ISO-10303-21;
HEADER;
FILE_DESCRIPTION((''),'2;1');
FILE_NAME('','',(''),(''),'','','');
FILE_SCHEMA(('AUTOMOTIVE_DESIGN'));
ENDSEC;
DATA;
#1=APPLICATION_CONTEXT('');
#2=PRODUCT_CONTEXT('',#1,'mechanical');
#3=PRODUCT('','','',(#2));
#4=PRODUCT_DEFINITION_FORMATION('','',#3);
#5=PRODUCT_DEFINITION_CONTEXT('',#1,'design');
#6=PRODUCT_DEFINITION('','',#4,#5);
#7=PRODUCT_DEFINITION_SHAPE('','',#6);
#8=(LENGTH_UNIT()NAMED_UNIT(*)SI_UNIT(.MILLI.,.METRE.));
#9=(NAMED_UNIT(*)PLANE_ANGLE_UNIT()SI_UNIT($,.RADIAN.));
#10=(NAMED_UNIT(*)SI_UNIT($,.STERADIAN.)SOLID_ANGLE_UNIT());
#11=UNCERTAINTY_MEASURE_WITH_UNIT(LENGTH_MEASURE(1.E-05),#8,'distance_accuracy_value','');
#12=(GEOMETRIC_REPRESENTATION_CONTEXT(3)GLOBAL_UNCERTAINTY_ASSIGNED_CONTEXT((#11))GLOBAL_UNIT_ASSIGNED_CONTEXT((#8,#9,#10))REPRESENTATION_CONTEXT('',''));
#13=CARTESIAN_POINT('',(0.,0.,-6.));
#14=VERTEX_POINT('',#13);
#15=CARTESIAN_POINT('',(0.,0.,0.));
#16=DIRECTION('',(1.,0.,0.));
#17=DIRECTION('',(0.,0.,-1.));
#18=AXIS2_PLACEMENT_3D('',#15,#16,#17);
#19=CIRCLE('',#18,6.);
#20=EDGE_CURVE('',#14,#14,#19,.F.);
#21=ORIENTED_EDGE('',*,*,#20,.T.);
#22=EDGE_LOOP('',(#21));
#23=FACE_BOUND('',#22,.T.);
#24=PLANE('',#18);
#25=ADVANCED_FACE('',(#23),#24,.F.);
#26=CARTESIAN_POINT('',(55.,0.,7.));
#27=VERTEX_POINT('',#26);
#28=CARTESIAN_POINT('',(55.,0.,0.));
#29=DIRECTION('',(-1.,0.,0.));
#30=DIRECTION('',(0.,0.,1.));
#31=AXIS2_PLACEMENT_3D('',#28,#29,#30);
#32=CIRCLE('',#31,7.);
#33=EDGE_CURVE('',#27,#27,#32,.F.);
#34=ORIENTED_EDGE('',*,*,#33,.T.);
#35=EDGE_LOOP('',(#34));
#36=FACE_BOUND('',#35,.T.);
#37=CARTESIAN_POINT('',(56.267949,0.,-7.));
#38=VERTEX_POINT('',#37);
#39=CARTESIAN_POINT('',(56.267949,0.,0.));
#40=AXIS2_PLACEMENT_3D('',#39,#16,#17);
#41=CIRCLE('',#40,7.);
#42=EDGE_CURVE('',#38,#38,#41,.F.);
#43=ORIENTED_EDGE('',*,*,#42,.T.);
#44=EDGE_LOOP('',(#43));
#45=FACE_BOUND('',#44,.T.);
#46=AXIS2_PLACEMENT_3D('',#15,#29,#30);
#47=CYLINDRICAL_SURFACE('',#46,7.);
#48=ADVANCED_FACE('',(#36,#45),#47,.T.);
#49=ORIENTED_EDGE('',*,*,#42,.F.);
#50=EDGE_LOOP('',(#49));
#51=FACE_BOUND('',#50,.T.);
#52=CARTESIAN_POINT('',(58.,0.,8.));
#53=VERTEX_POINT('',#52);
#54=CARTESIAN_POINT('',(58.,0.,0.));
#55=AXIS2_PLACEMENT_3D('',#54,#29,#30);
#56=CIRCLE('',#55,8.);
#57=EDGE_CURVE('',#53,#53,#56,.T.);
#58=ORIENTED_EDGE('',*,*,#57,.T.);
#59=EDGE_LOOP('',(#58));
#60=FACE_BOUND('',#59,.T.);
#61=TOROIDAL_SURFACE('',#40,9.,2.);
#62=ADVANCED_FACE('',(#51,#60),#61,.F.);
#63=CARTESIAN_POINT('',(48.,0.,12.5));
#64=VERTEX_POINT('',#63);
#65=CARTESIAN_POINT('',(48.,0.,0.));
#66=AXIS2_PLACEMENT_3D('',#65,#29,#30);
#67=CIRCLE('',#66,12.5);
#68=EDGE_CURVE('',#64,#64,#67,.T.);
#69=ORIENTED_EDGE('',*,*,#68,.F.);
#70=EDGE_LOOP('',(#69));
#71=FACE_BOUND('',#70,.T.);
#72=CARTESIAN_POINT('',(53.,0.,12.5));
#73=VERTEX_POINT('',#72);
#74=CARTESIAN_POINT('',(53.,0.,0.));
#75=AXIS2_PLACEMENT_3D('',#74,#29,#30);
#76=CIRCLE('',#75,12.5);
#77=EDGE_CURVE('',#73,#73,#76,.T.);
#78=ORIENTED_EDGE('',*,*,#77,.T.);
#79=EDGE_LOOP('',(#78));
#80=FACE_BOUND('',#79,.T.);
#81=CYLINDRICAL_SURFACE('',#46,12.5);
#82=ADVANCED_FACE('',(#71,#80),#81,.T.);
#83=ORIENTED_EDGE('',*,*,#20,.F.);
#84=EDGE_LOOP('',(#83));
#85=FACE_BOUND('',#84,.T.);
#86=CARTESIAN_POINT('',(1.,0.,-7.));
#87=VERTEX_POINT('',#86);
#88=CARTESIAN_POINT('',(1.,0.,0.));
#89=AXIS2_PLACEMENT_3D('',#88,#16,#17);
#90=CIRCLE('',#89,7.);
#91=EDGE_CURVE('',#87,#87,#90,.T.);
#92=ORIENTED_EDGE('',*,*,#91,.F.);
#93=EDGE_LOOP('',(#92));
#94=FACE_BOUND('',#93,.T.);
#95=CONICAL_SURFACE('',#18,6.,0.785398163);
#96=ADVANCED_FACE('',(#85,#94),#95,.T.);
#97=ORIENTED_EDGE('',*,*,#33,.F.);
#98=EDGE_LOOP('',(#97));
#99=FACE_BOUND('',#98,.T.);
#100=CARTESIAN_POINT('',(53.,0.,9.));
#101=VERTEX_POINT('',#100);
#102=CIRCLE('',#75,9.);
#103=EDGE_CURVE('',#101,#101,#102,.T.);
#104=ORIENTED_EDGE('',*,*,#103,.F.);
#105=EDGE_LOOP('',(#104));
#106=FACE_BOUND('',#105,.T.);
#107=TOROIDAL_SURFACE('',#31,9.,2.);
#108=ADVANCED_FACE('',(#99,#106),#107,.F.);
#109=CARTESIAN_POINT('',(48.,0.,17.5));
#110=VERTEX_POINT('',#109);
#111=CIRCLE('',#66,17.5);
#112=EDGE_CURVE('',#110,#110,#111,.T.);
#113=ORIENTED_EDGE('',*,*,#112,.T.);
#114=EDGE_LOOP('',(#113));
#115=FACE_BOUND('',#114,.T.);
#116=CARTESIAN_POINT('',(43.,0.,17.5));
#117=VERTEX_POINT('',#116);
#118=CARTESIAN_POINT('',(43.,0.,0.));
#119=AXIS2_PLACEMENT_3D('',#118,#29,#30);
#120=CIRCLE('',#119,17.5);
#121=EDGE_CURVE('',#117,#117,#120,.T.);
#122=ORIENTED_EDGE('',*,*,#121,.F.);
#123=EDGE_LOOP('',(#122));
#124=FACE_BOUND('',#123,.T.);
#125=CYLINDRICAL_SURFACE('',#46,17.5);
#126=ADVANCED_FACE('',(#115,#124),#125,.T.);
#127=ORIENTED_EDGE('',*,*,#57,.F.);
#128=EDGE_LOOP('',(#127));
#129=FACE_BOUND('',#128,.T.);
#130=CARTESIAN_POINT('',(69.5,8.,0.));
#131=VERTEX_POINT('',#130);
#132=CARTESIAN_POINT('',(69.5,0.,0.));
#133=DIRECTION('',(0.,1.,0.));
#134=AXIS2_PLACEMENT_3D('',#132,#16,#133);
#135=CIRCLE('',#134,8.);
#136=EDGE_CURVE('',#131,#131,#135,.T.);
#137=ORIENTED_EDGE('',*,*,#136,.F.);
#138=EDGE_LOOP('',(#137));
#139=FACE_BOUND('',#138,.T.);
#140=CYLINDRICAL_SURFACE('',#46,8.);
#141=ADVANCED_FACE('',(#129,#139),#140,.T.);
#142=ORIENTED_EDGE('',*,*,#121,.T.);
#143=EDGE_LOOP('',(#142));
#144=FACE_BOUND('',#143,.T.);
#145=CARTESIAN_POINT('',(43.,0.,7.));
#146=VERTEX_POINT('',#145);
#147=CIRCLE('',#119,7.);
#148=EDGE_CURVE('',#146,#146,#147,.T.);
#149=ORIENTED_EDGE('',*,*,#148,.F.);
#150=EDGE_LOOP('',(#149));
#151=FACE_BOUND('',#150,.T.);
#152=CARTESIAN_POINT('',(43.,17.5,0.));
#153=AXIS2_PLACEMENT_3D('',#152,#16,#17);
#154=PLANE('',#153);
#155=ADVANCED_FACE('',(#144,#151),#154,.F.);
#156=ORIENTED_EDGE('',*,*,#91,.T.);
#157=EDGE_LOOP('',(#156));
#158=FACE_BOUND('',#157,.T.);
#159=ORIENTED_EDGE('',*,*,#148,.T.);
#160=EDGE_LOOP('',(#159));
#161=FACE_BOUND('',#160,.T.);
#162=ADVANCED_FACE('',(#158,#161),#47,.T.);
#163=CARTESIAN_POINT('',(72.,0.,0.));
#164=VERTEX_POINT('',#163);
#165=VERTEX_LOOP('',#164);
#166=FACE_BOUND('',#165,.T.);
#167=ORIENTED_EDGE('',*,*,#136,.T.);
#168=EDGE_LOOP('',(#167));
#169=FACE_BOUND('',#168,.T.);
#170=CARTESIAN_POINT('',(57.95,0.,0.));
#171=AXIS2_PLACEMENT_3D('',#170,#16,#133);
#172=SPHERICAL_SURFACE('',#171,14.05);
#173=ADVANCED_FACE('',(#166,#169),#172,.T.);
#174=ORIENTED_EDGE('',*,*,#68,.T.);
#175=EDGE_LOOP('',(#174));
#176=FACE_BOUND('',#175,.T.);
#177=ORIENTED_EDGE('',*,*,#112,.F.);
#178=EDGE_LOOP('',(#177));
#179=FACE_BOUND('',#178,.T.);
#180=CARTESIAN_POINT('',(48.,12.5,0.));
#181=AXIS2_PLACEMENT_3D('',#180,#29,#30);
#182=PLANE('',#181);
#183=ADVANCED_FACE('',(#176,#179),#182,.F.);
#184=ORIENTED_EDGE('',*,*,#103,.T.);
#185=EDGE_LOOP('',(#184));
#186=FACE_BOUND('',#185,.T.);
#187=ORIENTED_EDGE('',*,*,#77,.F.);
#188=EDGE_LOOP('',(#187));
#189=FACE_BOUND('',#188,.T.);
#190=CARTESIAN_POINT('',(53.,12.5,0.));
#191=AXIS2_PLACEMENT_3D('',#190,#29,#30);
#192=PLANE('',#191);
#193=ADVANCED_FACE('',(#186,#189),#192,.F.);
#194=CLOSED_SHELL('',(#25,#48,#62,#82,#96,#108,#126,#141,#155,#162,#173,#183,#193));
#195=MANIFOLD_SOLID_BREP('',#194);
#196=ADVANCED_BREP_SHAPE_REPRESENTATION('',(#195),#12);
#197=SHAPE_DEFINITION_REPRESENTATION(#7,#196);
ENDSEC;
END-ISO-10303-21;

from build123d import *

# Parameters (mm, degrees)
RADYUS2_R = 2
PAH1_SIZE = 1
IZIM2_W   = 0.487804803
IZIM2_H   = 8


with BuildPart() as part:
    # Çizim1 → Döndür1 (revolve)
    with BuildSketch(Plane.XY, mode=Mode.PRIVATE) as d_nd_r1_sk:
        Polygon((0, 0), (0, 7), (43, 7), (43, 17.5), (48, 17.5), (48, 12.5), (53, 12.5), (53, 7), (58, 7), (58, 8), (72, 8), (72, 0), align=None)
    revolve(d_nd_r1_sk.sketch.rotate(Axis((0, 0, 0), (1, 0, 0)), 90), axis=Axis((0, 0, 0), (1, 0, 0)))

    # Radyus2
    # the kernel refuses this fillet: 2 mm, written as the material it adds along each edge
    with BuildSketch(Plane(origin=(58, 0, 0), x_dir=(0, 0, 1), z_dir=(0, 1, 0))) as radyus2_piece_1:
        with BuildLine():
            CenterArc((9, -1.732050808), RADYUS2_R, 120, 60)
            Line((8, 0), (7.98, 0.034641016))
            ThreePointArc((7.98, 0.034641016), (7.5, 0.04), (7, 0.04))
            Line((7, 0.04), (6.96, 0))
            Line((6.96, 0), (6.96, -1.732050808))
            Line((6.96, -1.732050808), (7, -1.732050808))
        make_face()
    revolve(axis=Axis((58, 0, 0), (1, 0, 0)))
    with BuildSketch(Plane(origin=(53, 0, 0), x_dir=(0, 0, 1), z_dir=(0, 1, 0))) as radyus2_piece_2:
        with BuildLine():
            CenterArc((7 + RADYUS2_R, RADYUS2_R), RADYUS2_R, 180, 90)
            Line((7, RADYUS2_R), (7 - RADYUS2_R * 0.02, RADYUS2_R))
            Line((7 - RADYUS2_R * 0.02, RADYUS2_R), (7 - RADYUS2_R * 0.02, -RADYUS2_R * 0.02))
            Line((7 - RADYUS2_R * 0.02, -RADYUS2_R * 0.02), (7 + RADYUS2_R, -RADYUS2_R * 0.02))
            Line((7 + RADYUS2_R, -RADYUS2_R * 0.02), (7 + RADYUS2_R, 0))
        make_face()
    revolve(axis=Axis((53, 0, 0), (1, 0, 0)))

    # Pah1
    pah1_edges = [part.edges().sort_by_distance(p)[0] for p in [
        (0, 0, -7),
    ]]
    chamfer(pah1_edges, length=PAH1_SIZE)

    # Çizim2 → Kes-Döndür1 (revolve, cut)
    with BuildSketch(Plane.XY):
        with BuildLine():
            Line((69.5, 8), (72, 8))
            Line((72, 8), (72, 0))
            ThreePointArc((72, 0), (71.360443691, 4.190763654), (69.5, 8))
        make_face()
        with Locations((72.243902402, 4)):
            Rectangle(IZIM2_W, IZIM2_H)
    revolve(axis=Axis((72, 0, 0), (-1, 0, 0)), mode=Mode.SUBTRACT)


solid = part.part
